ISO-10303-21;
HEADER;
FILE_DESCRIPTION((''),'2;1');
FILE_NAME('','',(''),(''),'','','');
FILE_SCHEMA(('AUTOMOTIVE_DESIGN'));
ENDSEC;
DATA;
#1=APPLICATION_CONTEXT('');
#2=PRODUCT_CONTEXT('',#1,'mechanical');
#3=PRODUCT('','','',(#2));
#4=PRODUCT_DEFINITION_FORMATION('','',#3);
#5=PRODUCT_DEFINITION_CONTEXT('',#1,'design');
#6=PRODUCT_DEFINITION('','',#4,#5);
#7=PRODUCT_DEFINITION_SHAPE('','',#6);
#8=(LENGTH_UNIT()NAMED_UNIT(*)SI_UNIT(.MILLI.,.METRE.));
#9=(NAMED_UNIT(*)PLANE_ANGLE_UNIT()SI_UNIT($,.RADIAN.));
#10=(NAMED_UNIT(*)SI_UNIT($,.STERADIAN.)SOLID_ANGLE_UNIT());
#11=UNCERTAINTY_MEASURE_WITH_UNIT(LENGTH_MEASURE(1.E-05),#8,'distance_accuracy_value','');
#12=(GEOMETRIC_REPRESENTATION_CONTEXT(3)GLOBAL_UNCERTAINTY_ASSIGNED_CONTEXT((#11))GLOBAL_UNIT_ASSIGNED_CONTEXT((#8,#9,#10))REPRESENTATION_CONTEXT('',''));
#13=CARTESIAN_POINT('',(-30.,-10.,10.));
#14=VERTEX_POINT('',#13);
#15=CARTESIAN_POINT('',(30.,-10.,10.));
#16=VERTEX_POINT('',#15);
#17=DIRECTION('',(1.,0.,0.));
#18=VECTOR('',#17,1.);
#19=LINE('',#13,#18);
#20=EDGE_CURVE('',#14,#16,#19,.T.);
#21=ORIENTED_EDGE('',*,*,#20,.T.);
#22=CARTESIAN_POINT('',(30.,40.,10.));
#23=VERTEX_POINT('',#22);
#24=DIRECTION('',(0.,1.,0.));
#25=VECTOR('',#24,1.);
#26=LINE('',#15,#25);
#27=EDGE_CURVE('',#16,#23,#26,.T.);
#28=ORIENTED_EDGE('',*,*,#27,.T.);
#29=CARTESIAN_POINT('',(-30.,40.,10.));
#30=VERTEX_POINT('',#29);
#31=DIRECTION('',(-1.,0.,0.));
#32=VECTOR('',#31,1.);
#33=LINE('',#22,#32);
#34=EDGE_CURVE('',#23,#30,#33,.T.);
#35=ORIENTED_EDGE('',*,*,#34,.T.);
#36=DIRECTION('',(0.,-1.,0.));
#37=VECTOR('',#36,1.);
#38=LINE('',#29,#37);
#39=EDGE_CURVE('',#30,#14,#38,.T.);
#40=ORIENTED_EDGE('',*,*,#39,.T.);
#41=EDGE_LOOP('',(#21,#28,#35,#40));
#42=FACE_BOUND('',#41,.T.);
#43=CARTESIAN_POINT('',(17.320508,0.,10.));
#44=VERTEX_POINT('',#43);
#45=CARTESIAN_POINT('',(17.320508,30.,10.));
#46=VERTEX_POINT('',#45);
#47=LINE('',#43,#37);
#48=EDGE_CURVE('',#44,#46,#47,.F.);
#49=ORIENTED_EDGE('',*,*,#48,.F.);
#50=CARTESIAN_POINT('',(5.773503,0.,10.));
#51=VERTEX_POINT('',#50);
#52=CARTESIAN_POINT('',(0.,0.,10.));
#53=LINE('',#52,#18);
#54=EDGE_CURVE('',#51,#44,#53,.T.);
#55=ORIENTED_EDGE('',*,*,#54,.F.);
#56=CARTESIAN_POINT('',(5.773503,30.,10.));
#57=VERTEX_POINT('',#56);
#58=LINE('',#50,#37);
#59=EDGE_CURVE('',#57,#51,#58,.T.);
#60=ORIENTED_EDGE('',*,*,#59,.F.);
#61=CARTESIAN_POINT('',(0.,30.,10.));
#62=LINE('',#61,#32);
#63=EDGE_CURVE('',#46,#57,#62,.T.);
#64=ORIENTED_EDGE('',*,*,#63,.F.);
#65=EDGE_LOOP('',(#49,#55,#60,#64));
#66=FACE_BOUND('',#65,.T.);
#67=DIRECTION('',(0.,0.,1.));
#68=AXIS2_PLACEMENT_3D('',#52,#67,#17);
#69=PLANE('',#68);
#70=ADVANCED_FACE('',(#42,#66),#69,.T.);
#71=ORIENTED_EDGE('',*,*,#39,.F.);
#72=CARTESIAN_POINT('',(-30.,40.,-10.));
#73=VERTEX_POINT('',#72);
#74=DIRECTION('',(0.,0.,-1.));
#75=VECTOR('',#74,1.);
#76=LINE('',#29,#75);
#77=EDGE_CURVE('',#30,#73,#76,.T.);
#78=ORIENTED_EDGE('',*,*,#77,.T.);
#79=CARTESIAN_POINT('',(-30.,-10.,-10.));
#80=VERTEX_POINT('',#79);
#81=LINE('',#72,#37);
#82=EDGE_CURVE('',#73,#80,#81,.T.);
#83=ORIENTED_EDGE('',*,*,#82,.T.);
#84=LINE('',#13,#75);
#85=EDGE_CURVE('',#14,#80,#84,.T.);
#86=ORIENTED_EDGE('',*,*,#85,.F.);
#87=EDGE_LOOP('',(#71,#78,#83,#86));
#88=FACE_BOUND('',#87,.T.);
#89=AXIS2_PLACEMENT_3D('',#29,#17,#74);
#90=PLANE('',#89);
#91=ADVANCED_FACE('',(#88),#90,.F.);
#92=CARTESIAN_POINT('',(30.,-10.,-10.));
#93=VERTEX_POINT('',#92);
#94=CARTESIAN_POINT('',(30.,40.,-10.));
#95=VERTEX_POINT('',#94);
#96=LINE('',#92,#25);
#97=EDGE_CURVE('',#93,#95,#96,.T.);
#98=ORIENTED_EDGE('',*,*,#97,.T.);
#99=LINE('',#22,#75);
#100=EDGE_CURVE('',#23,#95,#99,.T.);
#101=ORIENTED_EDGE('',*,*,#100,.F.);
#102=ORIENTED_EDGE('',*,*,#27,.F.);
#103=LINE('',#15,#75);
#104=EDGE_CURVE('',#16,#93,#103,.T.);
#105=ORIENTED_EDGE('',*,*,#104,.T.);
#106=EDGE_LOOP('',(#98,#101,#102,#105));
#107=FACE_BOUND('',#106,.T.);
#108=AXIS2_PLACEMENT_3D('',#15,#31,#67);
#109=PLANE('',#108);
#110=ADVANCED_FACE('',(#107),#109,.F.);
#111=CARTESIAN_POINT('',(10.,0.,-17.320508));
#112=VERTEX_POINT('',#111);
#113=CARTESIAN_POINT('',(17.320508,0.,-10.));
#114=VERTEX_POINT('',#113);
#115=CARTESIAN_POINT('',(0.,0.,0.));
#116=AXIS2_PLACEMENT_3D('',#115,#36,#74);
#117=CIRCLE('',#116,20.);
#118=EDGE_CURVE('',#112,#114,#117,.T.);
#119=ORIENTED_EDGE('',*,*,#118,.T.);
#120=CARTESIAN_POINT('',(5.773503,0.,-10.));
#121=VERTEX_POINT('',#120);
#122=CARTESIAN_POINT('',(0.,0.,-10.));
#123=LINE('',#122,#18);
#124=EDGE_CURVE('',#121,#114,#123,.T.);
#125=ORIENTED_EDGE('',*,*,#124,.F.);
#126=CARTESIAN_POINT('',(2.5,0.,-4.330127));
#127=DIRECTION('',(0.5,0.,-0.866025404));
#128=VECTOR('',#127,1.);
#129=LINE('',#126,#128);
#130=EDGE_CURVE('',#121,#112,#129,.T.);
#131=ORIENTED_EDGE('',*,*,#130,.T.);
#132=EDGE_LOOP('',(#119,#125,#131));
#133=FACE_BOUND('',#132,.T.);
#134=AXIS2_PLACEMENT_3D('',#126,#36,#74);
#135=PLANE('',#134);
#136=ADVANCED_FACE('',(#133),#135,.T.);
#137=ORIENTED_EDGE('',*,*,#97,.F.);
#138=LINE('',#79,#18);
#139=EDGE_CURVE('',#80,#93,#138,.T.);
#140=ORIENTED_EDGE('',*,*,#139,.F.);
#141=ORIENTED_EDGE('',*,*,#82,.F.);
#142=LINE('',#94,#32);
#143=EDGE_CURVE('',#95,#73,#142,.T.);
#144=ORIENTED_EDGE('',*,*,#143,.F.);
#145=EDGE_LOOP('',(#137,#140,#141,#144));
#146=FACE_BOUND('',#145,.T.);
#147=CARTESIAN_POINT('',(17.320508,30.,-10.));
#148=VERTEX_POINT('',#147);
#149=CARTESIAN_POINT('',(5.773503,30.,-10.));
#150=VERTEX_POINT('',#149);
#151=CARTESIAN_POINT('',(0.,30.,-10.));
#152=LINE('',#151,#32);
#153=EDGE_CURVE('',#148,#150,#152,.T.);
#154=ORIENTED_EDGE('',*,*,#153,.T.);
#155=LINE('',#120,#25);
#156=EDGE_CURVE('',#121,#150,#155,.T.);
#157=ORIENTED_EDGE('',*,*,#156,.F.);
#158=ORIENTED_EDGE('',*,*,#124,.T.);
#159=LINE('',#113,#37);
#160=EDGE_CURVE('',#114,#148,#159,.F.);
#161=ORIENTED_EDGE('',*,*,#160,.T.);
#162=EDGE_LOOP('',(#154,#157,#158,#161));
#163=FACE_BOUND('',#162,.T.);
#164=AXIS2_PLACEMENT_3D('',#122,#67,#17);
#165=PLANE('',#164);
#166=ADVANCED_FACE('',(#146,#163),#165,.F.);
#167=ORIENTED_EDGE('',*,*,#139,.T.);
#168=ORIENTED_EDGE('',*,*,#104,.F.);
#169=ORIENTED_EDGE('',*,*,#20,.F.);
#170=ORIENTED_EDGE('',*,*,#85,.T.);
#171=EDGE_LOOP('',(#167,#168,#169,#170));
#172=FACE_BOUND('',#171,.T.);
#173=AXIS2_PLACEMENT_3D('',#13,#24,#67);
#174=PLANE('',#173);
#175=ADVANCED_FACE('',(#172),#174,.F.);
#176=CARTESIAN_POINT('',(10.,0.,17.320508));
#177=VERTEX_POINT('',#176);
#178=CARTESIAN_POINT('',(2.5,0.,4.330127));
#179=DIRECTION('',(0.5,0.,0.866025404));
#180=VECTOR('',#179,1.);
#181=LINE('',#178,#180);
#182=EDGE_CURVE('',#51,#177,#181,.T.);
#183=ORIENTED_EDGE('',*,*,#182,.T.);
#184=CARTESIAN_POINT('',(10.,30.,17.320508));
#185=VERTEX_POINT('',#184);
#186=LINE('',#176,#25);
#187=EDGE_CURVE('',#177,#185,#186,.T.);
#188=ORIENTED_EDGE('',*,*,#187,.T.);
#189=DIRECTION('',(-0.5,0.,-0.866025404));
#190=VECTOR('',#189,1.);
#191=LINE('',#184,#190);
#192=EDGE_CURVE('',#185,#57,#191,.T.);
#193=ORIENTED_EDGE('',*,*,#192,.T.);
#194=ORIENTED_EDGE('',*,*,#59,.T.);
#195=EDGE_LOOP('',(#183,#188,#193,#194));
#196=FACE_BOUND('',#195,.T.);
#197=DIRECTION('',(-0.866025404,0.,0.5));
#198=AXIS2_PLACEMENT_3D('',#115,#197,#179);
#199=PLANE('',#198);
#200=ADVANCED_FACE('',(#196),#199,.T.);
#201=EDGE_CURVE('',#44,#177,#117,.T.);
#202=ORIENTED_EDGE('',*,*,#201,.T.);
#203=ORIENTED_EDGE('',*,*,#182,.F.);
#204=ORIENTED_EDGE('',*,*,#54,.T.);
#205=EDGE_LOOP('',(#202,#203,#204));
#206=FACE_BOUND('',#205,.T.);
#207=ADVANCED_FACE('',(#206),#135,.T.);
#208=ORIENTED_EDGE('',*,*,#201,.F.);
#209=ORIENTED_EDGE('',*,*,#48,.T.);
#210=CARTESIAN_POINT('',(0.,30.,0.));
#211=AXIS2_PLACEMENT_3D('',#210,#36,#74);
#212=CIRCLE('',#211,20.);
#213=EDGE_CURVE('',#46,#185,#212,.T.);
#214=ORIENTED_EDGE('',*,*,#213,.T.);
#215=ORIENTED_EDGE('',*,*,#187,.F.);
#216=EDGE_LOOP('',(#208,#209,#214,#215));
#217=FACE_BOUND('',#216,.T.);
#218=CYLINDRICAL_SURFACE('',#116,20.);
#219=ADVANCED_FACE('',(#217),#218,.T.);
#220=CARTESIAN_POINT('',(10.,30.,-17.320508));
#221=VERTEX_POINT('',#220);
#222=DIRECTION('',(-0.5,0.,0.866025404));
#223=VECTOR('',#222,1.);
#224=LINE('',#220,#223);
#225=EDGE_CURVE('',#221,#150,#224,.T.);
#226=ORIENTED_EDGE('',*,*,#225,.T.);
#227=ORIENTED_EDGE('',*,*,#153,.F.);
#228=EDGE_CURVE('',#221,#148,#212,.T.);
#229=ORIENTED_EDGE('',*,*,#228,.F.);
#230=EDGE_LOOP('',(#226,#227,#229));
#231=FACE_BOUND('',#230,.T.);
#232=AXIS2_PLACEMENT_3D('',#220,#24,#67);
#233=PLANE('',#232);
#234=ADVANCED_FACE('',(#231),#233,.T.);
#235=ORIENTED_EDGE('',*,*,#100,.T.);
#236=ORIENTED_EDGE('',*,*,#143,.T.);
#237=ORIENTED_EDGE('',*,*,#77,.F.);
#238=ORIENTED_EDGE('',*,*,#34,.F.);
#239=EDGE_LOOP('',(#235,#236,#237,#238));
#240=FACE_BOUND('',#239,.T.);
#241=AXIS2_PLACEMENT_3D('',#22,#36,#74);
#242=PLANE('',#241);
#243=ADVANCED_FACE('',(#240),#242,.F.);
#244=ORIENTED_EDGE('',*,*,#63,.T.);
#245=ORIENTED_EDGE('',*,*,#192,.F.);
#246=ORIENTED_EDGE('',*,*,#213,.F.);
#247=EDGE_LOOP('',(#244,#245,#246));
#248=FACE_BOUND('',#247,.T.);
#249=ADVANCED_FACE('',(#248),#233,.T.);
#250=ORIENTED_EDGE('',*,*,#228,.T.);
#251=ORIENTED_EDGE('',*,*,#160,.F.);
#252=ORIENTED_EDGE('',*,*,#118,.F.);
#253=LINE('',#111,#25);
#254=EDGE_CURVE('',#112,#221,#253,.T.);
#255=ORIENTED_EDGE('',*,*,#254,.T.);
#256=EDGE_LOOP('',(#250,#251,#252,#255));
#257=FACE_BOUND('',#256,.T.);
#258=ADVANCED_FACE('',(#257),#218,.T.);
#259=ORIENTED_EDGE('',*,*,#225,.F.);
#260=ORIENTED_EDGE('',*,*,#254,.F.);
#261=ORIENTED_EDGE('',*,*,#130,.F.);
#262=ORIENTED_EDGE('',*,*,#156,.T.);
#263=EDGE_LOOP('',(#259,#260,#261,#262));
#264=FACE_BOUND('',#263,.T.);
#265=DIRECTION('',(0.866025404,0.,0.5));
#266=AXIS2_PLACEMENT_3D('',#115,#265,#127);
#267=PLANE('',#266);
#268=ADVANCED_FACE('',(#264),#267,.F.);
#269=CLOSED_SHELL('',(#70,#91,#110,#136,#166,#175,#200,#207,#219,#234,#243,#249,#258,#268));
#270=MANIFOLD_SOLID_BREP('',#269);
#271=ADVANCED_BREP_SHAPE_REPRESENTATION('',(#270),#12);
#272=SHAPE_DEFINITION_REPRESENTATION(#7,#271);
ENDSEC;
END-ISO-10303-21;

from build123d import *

# Parameters (mm, degrees)
SKETCH1_W           = 60
SKETCH1_H           = 50
BOSS_EXTRUDE1_DEPTH = 10
REVOLVE1_DEPTH      = 30


# Read off the part's stored shape, not the designer's step: Revolve1
with BuildPart() as part:
    # Sketch1 → Boss-Extrude1 (new, symmetric)
    with BuildSketch(Plane.XY):
        with Locations((0, 15)):
            Rectangle(SKETCH1_W, SKETCH1_H)
    extrude(amount=BOSS_EXTRUDE1_DEPTH, both=True)

    # Revolve1 outline → Revolve1 (add)
    with BuildSketch(Plane(origin=(0, 0, 0), x_dir=(1, 0, 0), z_dir=(0, 1, 0))):
        with BuildLine():
            Line((10, 17.320508076), (5.773502692, 10))
            Line((5.773502692, 10), (17.320508076, 10))
            ThreePointArc((17.320508076, 10), (14.142135624, 14.142135624), (10, 17.320508076))
        make_face()
        with BuildLine():
            ThreePointArc((10, -17.320508076), (14.142135624, -14.142135624), (17.320508076, -10))
            Line((17.320508076, -10), (5.773502692, -10))
            Line((5.773502692, -10), (10, -17.320508076))
        make_face()
    extrude(amount=REVOLVE1_DEPTH)


solid = part.part
